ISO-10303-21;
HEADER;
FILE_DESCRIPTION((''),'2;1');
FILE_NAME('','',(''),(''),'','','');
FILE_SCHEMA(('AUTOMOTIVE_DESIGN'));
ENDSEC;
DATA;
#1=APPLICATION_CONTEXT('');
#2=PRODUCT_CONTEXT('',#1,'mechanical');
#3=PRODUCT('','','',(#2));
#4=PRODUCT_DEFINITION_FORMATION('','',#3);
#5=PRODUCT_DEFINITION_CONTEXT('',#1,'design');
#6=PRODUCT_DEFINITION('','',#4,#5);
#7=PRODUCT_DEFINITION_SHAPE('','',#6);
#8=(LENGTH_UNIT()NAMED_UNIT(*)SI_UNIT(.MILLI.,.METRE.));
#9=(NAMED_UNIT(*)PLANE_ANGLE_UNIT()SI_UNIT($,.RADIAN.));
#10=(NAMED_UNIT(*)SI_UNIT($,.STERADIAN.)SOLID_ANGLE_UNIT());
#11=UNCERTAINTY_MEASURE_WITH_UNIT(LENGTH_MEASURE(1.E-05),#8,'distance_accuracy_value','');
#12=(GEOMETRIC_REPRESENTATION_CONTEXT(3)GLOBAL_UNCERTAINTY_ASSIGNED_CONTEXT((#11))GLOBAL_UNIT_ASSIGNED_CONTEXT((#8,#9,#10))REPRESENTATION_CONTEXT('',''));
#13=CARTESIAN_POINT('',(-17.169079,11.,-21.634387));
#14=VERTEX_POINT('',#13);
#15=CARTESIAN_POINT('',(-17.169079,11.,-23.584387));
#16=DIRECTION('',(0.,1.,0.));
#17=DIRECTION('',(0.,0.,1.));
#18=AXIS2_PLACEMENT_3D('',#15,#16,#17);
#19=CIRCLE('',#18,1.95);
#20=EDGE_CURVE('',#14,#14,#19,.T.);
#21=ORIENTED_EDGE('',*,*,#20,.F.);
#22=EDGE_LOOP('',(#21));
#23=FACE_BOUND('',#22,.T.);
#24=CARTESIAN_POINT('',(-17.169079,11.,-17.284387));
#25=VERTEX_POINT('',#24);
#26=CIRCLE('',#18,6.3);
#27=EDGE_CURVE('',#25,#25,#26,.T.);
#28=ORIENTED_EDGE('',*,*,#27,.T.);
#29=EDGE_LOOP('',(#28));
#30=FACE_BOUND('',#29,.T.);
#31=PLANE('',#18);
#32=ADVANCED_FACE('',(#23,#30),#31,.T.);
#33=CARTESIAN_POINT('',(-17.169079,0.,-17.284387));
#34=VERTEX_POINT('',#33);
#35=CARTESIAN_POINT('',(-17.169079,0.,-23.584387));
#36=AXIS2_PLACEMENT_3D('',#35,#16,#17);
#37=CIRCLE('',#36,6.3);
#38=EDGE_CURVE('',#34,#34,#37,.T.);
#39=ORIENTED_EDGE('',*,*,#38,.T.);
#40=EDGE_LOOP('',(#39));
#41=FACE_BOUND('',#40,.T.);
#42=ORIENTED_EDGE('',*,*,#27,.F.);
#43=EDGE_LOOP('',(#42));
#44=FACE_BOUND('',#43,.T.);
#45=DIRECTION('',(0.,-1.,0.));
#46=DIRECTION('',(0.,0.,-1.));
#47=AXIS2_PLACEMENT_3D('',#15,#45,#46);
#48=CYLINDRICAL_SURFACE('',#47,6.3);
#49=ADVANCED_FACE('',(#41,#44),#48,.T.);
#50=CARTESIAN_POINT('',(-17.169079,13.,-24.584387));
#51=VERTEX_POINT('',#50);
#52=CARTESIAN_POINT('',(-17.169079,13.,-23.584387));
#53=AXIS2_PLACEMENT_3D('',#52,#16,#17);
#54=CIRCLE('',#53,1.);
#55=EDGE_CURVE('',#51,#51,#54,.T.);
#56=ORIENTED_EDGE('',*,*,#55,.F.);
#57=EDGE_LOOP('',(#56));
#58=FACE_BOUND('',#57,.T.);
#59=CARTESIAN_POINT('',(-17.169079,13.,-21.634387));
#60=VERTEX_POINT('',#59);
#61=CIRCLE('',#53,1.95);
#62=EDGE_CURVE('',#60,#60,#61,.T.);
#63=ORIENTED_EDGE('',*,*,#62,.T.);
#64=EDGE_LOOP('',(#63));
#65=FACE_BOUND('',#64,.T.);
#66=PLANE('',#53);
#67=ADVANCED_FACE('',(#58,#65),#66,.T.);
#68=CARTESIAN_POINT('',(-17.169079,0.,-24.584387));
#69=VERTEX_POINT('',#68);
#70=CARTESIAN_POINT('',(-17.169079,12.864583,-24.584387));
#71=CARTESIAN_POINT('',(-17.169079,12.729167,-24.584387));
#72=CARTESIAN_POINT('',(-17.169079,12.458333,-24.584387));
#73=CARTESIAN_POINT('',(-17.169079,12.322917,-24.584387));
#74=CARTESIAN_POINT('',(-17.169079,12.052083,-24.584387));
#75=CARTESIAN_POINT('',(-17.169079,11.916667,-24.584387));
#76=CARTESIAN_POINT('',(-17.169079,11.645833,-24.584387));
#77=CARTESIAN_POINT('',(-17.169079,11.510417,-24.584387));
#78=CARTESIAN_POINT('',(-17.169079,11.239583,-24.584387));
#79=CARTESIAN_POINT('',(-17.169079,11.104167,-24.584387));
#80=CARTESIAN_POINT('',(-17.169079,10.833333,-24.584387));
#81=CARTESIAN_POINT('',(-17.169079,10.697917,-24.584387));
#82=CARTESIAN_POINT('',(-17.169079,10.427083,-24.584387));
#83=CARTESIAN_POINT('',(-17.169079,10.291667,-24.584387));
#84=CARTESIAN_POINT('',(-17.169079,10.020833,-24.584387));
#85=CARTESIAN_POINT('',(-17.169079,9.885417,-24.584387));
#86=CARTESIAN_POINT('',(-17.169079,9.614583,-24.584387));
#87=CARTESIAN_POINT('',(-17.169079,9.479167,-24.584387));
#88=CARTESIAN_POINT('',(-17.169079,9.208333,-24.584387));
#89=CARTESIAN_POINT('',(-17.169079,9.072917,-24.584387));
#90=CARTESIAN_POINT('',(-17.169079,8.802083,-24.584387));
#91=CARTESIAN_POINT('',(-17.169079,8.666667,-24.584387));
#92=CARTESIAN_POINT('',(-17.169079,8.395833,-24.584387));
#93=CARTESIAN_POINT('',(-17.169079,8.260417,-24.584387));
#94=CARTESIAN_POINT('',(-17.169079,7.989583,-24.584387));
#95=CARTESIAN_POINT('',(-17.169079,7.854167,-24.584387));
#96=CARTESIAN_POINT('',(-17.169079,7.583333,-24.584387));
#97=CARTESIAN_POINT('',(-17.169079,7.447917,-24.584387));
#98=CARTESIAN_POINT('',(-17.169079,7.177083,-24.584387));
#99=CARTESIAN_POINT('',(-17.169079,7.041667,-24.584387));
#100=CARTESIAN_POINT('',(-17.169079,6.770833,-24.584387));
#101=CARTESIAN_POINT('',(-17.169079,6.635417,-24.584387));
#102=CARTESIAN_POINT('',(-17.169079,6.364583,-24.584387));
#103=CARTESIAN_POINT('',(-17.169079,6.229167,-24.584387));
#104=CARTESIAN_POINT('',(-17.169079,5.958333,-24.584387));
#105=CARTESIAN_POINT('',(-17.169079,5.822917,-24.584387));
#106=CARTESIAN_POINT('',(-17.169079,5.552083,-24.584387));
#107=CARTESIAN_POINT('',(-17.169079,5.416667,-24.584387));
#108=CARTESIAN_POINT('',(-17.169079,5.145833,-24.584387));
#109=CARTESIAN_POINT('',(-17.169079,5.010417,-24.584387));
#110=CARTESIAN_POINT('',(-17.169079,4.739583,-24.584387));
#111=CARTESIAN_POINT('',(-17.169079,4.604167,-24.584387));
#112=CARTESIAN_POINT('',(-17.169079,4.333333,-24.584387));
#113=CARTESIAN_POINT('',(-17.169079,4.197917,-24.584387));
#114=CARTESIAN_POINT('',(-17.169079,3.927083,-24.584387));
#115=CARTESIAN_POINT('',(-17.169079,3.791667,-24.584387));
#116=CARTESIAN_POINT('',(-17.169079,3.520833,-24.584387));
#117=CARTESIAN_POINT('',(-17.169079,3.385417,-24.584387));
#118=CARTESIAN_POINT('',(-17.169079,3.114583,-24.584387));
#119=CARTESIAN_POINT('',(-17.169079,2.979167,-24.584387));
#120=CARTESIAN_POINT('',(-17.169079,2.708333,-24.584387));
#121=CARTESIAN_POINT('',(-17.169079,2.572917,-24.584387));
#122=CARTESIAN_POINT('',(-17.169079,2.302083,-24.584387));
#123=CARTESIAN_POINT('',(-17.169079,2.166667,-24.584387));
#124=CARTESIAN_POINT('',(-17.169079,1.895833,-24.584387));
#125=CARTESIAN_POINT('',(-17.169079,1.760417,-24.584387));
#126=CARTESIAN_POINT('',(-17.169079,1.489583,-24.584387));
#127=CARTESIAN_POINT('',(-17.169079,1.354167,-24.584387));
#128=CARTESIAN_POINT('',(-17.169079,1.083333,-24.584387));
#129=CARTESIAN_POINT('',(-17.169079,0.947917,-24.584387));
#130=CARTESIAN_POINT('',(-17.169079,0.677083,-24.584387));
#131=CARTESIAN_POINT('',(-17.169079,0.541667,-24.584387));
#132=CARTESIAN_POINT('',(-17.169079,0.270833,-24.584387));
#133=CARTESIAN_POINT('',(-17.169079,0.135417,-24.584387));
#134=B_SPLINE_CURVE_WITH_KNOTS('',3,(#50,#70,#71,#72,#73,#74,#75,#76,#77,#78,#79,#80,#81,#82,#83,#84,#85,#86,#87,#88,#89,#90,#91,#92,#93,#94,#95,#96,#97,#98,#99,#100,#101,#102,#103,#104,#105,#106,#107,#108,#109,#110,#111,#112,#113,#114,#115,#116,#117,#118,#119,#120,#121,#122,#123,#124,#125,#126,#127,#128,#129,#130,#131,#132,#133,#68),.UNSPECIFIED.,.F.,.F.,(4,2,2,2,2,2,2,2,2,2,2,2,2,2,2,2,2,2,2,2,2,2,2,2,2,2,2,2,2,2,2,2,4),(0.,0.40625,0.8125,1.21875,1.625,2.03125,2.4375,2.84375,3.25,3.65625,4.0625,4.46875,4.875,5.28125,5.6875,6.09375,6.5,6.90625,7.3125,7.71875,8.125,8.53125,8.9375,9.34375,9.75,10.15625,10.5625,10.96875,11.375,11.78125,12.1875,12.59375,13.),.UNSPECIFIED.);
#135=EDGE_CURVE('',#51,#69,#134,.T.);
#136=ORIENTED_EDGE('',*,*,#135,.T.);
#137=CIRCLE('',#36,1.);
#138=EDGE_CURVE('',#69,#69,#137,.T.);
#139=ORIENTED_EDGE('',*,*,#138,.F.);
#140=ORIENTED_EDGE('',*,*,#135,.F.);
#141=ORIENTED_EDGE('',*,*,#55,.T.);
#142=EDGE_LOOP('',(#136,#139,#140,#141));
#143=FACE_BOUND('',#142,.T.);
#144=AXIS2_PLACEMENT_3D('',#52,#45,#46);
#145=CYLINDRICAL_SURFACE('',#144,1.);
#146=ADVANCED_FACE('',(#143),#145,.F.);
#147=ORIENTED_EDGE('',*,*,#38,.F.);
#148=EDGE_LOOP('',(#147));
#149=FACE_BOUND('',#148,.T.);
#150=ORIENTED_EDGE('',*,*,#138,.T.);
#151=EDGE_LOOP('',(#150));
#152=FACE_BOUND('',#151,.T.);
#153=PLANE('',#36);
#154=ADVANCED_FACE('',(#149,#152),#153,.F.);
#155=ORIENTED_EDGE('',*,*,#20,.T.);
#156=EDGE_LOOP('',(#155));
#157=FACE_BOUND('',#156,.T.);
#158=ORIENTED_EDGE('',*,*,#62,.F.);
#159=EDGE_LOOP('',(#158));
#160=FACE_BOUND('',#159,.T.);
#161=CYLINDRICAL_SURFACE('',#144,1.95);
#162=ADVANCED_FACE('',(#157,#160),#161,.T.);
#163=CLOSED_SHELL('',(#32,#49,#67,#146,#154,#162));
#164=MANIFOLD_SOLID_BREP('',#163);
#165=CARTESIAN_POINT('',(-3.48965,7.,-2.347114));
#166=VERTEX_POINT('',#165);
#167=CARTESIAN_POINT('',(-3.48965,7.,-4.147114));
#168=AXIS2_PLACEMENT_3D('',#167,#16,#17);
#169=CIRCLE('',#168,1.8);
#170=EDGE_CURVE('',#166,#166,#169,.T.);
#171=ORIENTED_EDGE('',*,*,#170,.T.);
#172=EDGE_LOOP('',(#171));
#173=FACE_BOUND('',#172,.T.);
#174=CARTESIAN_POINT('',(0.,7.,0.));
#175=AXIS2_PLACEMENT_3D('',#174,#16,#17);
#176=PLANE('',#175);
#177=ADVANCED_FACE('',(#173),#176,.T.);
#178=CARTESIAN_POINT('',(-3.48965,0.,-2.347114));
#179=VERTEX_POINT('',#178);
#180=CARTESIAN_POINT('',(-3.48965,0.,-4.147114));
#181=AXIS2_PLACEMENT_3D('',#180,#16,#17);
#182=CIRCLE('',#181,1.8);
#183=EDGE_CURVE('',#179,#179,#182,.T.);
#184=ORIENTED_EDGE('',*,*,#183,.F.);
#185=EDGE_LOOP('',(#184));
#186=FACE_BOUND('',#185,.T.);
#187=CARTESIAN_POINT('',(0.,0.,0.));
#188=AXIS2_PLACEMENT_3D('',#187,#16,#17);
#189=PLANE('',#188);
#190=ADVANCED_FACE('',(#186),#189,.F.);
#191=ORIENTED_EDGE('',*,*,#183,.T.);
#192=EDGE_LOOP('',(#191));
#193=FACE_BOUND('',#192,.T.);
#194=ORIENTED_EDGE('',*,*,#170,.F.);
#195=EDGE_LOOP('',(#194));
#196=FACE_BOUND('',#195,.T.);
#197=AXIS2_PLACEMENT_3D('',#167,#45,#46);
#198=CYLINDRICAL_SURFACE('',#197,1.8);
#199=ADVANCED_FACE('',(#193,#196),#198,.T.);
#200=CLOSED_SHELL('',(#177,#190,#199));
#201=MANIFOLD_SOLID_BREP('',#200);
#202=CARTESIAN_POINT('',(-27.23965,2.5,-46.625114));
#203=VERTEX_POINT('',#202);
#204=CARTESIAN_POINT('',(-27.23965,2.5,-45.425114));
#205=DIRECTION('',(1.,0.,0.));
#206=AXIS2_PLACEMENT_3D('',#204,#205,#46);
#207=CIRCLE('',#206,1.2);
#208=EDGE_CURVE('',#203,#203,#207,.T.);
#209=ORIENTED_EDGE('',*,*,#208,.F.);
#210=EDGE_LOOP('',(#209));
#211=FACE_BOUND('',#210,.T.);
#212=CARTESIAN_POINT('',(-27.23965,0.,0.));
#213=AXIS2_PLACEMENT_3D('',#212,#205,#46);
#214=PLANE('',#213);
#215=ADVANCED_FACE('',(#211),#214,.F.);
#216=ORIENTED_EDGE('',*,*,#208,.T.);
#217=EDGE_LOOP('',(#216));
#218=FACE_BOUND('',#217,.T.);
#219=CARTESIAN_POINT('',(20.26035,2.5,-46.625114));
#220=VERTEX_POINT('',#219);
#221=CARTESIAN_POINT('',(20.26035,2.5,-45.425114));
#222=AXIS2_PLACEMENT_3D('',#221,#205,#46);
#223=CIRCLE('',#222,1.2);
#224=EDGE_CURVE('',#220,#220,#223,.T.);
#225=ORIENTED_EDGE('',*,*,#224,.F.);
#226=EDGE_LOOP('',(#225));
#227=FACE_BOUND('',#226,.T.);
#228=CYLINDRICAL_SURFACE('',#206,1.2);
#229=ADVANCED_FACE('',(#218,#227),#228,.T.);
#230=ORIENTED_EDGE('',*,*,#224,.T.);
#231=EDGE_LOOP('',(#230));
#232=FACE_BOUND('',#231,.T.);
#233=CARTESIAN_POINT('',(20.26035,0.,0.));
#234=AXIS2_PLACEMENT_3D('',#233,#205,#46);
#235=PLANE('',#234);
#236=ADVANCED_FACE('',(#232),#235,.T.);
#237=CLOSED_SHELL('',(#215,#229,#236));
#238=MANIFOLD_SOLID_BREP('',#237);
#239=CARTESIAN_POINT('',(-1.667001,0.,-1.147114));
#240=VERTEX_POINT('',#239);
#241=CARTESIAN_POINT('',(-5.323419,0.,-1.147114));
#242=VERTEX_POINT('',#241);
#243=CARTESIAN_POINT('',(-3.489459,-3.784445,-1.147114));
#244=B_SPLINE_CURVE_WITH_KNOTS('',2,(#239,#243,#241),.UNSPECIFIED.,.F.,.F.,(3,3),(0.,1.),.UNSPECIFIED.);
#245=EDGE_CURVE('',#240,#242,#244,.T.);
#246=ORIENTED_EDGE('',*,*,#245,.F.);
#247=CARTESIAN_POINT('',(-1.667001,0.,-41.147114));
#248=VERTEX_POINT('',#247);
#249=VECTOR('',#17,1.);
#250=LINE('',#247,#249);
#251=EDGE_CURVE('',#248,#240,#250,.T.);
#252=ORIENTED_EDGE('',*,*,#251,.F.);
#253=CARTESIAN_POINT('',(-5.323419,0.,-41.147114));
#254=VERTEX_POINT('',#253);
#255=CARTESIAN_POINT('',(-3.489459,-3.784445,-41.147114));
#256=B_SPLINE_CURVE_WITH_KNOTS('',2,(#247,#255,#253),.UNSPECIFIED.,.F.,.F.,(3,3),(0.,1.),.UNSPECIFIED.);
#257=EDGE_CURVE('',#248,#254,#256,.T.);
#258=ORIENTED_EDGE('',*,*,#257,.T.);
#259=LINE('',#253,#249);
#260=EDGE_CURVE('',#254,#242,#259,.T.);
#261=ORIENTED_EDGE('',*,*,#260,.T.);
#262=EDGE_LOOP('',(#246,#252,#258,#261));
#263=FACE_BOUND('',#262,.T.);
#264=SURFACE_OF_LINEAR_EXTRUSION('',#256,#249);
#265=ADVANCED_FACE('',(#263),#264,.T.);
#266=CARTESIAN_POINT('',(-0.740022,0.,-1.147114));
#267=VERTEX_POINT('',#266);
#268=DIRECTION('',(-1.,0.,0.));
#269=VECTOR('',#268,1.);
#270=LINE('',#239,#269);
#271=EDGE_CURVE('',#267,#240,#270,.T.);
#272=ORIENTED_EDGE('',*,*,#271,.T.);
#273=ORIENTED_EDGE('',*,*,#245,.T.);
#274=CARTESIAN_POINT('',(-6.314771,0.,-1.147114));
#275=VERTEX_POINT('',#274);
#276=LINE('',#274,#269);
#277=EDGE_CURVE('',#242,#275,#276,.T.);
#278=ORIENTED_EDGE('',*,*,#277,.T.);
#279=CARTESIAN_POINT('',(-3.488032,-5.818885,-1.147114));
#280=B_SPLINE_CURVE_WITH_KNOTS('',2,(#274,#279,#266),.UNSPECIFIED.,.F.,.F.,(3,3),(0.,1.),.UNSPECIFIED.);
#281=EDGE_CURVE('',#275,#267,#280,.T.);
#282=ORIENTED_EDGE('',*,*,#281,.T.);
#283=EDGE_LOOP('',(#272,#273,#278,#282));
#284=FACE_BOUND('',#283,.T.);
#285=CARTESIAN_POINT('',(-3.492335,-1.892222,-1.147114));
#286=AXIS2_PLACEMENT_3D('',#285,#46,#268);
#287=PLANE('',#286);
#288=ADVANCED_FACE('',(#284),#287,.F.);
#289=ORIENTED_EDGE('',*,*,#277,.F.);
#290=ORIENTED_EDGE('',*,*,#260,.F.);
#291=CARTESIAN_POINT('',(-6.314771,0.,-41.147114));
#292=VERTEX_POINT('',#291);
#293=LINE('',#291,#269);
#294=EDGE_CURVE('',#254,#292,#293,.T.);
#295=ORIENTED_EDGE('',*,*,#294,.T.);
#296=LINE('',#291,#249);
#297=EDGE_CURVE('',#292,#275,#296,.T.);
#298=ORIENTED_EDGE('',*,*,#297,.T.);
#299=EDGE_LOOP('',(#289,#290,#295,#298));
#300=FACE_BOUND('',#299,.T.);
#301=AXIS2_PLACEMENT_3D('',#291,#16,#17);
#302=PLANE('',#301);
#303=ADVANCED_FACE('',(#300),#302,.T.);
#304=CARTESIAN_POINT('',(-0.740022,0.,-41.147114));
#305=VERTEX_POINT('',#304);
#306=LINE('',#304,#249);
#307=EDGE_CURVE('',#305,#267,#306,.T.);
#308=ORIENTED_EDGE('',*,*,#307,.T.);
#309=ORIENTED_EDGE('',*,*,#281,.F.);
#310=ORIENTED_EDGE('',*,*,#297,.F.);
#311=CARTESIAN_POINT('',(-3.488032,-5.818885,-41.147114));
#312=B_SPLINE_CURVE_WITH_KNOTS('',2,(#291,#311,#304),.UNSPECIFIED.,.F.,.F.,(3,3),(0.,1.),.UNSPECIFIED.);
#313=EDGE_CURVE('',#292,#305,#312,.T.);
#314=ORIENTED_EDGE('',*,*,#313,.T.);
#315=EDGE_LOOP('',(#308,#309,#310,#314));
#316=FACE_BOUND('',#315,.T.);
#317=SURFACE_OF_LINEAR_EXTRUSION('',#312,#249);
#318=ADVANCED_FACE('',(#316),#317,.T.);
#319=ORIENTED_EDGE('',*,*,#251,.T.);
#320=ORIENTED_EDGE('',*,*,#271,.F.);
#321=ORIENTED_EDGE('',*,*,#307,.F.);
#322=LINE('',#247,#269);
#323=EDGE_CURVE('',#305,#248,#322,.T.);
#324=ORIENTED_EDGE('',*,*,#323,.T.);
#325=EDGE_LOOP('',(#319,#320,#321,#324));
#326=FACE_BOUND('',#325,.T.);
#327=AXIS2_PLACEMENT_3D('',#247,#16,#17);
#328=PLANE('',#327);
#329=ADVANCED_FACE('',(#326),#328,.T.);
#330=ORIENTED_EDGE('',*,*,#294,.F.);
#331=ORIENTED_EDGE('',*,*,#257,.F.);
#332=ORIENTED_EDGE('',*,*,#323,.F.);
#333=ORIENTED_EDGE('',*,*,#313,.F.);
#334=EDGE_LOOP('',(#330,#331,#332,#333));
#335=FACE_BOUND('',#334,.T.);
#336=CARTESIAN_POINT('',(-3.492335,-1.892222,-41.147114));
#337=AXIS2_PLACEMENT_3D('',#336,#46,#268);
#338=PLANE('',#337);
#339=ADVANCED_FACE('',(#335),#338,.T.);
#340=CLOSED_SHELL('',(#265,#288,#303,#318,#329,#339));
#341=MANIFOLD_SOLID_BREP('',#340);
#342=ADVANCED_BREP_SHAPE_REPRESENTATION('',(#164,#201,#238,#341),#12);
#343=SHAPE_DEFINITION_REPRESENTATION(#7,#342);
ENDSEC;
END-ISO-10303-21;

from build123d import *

# Parameters (mm, degrees)
BOSS_EXTRUDE3_OUTLINE_R = 6.3
BOSS_EXTRUDE3_DEPTH     = 11
SKETCH4_R               = 1.95
BOSS_EXTRUDE8_DEPTH     = 2
SKETCH11_R              = 1
CUT_EXTRUDE3_DEPTH      = 41.160605774
SKETCH7_R               = 1.2
BOSS_EXTRUDE10_DEPTH    = 47.5
BOSS_EXTRUDE14_DEPTH    = 40
SKETCH17_R              = 1.8
BOSS_EXTRUDE15_DEPTH    = 7


# Read off the part's stored shape, not the designer's step: Boss-Extrude3
with BuildPart() as part:
    # Boss-Extrude3 outline → Boss-Extrude3 (new body)
    with BuildSketch(Plane(origin=(0, 0, 0), x_dir=(1, 0, 0), z_dir=(0, 1, 0))):
        with Locations((-17.169079115, 23.584386921)):
            Circle(BOSS_EXTRUDE3_OUTLINE_R)
    extrude(amount=BOSS_EXTRUDE3_DEPTH)

    # Sketch4 → Boss-Extrude8 (add)
    with BuildSketch(Plane(origin=(0, 11, 0), x_dir=(1, 0, 0), z_dir=(0, 1, 0))):
        with Locations(Location((-17.169079115, 23.584386921, 0), (0, 0, 270))):
            Circle(SKETCH4_R)
    extrude(amount=BOSS_EXTRUDE8_DEPTH)

    # Sketch11 → Cut-Extrude3 (cut, through all)
    with BuildSketch(Plane(origin=(0, 0, 0), x_dir=(1, 0, 0), z_dir=(0, 1, 0))):
        with Locations(Location((-17.169079115, 23.584386921, 0), (0, 0, 90))):
            Circle(SKETCH11_R)
    extrude(amount=CUT_EXTRUDE3_DEPTH, mode=Mode.SUBTRACT)


with BuildPart() as body_2:
    # Sketch7 → Boss-Extrude10 (new body)
    with BuildSketch(Plane(origin=(20.260349504, 0, 0), x_dir=(0, 0, -1), z_dir=(1, 0, 0))):
        with Locations((45.425113589, 2.5)):
            Circle(SKETCH7_R)
    extrude(amount=-BOSS_EXTRUDE10_DEPTH)


with BuildPart() as body_3:
    # Sketch13 → Boss-Extrude14 (new body)
    with BuildSketch(Plane.XY.offset(-1.147113589)):
        with BuildLine():
            Line((-6.31477114, 0), (-5.323418525, 0))
            add(Edge.make_bspline(
                [(-5.323418525, 0), (-3.489459234, -3.784444713), (-1.667001085, 0)],
                knots=[0, 0, 0, 1, 1, 1], degree=2))
            Line((-1.667001085, 0), (-0.740022016, 0))
            add(Edge.make_bspline(
                [(-6.31477114, 0), (-3.488031914, -5.818885026), (-0.740022016, 0)],
                knots=[0, 0, 0, 1, 1, 1], degree=2))
        make_face()
    extrude(amount=-BOSS_EXTRUDE14_DEPTH)


with BuildPart() as body_4:
    # Sketch17 → Boss-Extrude15 (new body)
    with BuildSketch(Plane(origin=(0, 0, 0), x_dir=(1, 0, 0), z_dir=(0, 1, 0))):
        with Locations(Location((-3.489650496, 4.147113589, 0), (0, 0, 270))):
            Circle(SKETCH17_R)
    extrude(amount=BOSS_EXTRUDE15_DEPTH)


solid = Compound([part.part, body_2.part, body_3.part, body_4.part])
